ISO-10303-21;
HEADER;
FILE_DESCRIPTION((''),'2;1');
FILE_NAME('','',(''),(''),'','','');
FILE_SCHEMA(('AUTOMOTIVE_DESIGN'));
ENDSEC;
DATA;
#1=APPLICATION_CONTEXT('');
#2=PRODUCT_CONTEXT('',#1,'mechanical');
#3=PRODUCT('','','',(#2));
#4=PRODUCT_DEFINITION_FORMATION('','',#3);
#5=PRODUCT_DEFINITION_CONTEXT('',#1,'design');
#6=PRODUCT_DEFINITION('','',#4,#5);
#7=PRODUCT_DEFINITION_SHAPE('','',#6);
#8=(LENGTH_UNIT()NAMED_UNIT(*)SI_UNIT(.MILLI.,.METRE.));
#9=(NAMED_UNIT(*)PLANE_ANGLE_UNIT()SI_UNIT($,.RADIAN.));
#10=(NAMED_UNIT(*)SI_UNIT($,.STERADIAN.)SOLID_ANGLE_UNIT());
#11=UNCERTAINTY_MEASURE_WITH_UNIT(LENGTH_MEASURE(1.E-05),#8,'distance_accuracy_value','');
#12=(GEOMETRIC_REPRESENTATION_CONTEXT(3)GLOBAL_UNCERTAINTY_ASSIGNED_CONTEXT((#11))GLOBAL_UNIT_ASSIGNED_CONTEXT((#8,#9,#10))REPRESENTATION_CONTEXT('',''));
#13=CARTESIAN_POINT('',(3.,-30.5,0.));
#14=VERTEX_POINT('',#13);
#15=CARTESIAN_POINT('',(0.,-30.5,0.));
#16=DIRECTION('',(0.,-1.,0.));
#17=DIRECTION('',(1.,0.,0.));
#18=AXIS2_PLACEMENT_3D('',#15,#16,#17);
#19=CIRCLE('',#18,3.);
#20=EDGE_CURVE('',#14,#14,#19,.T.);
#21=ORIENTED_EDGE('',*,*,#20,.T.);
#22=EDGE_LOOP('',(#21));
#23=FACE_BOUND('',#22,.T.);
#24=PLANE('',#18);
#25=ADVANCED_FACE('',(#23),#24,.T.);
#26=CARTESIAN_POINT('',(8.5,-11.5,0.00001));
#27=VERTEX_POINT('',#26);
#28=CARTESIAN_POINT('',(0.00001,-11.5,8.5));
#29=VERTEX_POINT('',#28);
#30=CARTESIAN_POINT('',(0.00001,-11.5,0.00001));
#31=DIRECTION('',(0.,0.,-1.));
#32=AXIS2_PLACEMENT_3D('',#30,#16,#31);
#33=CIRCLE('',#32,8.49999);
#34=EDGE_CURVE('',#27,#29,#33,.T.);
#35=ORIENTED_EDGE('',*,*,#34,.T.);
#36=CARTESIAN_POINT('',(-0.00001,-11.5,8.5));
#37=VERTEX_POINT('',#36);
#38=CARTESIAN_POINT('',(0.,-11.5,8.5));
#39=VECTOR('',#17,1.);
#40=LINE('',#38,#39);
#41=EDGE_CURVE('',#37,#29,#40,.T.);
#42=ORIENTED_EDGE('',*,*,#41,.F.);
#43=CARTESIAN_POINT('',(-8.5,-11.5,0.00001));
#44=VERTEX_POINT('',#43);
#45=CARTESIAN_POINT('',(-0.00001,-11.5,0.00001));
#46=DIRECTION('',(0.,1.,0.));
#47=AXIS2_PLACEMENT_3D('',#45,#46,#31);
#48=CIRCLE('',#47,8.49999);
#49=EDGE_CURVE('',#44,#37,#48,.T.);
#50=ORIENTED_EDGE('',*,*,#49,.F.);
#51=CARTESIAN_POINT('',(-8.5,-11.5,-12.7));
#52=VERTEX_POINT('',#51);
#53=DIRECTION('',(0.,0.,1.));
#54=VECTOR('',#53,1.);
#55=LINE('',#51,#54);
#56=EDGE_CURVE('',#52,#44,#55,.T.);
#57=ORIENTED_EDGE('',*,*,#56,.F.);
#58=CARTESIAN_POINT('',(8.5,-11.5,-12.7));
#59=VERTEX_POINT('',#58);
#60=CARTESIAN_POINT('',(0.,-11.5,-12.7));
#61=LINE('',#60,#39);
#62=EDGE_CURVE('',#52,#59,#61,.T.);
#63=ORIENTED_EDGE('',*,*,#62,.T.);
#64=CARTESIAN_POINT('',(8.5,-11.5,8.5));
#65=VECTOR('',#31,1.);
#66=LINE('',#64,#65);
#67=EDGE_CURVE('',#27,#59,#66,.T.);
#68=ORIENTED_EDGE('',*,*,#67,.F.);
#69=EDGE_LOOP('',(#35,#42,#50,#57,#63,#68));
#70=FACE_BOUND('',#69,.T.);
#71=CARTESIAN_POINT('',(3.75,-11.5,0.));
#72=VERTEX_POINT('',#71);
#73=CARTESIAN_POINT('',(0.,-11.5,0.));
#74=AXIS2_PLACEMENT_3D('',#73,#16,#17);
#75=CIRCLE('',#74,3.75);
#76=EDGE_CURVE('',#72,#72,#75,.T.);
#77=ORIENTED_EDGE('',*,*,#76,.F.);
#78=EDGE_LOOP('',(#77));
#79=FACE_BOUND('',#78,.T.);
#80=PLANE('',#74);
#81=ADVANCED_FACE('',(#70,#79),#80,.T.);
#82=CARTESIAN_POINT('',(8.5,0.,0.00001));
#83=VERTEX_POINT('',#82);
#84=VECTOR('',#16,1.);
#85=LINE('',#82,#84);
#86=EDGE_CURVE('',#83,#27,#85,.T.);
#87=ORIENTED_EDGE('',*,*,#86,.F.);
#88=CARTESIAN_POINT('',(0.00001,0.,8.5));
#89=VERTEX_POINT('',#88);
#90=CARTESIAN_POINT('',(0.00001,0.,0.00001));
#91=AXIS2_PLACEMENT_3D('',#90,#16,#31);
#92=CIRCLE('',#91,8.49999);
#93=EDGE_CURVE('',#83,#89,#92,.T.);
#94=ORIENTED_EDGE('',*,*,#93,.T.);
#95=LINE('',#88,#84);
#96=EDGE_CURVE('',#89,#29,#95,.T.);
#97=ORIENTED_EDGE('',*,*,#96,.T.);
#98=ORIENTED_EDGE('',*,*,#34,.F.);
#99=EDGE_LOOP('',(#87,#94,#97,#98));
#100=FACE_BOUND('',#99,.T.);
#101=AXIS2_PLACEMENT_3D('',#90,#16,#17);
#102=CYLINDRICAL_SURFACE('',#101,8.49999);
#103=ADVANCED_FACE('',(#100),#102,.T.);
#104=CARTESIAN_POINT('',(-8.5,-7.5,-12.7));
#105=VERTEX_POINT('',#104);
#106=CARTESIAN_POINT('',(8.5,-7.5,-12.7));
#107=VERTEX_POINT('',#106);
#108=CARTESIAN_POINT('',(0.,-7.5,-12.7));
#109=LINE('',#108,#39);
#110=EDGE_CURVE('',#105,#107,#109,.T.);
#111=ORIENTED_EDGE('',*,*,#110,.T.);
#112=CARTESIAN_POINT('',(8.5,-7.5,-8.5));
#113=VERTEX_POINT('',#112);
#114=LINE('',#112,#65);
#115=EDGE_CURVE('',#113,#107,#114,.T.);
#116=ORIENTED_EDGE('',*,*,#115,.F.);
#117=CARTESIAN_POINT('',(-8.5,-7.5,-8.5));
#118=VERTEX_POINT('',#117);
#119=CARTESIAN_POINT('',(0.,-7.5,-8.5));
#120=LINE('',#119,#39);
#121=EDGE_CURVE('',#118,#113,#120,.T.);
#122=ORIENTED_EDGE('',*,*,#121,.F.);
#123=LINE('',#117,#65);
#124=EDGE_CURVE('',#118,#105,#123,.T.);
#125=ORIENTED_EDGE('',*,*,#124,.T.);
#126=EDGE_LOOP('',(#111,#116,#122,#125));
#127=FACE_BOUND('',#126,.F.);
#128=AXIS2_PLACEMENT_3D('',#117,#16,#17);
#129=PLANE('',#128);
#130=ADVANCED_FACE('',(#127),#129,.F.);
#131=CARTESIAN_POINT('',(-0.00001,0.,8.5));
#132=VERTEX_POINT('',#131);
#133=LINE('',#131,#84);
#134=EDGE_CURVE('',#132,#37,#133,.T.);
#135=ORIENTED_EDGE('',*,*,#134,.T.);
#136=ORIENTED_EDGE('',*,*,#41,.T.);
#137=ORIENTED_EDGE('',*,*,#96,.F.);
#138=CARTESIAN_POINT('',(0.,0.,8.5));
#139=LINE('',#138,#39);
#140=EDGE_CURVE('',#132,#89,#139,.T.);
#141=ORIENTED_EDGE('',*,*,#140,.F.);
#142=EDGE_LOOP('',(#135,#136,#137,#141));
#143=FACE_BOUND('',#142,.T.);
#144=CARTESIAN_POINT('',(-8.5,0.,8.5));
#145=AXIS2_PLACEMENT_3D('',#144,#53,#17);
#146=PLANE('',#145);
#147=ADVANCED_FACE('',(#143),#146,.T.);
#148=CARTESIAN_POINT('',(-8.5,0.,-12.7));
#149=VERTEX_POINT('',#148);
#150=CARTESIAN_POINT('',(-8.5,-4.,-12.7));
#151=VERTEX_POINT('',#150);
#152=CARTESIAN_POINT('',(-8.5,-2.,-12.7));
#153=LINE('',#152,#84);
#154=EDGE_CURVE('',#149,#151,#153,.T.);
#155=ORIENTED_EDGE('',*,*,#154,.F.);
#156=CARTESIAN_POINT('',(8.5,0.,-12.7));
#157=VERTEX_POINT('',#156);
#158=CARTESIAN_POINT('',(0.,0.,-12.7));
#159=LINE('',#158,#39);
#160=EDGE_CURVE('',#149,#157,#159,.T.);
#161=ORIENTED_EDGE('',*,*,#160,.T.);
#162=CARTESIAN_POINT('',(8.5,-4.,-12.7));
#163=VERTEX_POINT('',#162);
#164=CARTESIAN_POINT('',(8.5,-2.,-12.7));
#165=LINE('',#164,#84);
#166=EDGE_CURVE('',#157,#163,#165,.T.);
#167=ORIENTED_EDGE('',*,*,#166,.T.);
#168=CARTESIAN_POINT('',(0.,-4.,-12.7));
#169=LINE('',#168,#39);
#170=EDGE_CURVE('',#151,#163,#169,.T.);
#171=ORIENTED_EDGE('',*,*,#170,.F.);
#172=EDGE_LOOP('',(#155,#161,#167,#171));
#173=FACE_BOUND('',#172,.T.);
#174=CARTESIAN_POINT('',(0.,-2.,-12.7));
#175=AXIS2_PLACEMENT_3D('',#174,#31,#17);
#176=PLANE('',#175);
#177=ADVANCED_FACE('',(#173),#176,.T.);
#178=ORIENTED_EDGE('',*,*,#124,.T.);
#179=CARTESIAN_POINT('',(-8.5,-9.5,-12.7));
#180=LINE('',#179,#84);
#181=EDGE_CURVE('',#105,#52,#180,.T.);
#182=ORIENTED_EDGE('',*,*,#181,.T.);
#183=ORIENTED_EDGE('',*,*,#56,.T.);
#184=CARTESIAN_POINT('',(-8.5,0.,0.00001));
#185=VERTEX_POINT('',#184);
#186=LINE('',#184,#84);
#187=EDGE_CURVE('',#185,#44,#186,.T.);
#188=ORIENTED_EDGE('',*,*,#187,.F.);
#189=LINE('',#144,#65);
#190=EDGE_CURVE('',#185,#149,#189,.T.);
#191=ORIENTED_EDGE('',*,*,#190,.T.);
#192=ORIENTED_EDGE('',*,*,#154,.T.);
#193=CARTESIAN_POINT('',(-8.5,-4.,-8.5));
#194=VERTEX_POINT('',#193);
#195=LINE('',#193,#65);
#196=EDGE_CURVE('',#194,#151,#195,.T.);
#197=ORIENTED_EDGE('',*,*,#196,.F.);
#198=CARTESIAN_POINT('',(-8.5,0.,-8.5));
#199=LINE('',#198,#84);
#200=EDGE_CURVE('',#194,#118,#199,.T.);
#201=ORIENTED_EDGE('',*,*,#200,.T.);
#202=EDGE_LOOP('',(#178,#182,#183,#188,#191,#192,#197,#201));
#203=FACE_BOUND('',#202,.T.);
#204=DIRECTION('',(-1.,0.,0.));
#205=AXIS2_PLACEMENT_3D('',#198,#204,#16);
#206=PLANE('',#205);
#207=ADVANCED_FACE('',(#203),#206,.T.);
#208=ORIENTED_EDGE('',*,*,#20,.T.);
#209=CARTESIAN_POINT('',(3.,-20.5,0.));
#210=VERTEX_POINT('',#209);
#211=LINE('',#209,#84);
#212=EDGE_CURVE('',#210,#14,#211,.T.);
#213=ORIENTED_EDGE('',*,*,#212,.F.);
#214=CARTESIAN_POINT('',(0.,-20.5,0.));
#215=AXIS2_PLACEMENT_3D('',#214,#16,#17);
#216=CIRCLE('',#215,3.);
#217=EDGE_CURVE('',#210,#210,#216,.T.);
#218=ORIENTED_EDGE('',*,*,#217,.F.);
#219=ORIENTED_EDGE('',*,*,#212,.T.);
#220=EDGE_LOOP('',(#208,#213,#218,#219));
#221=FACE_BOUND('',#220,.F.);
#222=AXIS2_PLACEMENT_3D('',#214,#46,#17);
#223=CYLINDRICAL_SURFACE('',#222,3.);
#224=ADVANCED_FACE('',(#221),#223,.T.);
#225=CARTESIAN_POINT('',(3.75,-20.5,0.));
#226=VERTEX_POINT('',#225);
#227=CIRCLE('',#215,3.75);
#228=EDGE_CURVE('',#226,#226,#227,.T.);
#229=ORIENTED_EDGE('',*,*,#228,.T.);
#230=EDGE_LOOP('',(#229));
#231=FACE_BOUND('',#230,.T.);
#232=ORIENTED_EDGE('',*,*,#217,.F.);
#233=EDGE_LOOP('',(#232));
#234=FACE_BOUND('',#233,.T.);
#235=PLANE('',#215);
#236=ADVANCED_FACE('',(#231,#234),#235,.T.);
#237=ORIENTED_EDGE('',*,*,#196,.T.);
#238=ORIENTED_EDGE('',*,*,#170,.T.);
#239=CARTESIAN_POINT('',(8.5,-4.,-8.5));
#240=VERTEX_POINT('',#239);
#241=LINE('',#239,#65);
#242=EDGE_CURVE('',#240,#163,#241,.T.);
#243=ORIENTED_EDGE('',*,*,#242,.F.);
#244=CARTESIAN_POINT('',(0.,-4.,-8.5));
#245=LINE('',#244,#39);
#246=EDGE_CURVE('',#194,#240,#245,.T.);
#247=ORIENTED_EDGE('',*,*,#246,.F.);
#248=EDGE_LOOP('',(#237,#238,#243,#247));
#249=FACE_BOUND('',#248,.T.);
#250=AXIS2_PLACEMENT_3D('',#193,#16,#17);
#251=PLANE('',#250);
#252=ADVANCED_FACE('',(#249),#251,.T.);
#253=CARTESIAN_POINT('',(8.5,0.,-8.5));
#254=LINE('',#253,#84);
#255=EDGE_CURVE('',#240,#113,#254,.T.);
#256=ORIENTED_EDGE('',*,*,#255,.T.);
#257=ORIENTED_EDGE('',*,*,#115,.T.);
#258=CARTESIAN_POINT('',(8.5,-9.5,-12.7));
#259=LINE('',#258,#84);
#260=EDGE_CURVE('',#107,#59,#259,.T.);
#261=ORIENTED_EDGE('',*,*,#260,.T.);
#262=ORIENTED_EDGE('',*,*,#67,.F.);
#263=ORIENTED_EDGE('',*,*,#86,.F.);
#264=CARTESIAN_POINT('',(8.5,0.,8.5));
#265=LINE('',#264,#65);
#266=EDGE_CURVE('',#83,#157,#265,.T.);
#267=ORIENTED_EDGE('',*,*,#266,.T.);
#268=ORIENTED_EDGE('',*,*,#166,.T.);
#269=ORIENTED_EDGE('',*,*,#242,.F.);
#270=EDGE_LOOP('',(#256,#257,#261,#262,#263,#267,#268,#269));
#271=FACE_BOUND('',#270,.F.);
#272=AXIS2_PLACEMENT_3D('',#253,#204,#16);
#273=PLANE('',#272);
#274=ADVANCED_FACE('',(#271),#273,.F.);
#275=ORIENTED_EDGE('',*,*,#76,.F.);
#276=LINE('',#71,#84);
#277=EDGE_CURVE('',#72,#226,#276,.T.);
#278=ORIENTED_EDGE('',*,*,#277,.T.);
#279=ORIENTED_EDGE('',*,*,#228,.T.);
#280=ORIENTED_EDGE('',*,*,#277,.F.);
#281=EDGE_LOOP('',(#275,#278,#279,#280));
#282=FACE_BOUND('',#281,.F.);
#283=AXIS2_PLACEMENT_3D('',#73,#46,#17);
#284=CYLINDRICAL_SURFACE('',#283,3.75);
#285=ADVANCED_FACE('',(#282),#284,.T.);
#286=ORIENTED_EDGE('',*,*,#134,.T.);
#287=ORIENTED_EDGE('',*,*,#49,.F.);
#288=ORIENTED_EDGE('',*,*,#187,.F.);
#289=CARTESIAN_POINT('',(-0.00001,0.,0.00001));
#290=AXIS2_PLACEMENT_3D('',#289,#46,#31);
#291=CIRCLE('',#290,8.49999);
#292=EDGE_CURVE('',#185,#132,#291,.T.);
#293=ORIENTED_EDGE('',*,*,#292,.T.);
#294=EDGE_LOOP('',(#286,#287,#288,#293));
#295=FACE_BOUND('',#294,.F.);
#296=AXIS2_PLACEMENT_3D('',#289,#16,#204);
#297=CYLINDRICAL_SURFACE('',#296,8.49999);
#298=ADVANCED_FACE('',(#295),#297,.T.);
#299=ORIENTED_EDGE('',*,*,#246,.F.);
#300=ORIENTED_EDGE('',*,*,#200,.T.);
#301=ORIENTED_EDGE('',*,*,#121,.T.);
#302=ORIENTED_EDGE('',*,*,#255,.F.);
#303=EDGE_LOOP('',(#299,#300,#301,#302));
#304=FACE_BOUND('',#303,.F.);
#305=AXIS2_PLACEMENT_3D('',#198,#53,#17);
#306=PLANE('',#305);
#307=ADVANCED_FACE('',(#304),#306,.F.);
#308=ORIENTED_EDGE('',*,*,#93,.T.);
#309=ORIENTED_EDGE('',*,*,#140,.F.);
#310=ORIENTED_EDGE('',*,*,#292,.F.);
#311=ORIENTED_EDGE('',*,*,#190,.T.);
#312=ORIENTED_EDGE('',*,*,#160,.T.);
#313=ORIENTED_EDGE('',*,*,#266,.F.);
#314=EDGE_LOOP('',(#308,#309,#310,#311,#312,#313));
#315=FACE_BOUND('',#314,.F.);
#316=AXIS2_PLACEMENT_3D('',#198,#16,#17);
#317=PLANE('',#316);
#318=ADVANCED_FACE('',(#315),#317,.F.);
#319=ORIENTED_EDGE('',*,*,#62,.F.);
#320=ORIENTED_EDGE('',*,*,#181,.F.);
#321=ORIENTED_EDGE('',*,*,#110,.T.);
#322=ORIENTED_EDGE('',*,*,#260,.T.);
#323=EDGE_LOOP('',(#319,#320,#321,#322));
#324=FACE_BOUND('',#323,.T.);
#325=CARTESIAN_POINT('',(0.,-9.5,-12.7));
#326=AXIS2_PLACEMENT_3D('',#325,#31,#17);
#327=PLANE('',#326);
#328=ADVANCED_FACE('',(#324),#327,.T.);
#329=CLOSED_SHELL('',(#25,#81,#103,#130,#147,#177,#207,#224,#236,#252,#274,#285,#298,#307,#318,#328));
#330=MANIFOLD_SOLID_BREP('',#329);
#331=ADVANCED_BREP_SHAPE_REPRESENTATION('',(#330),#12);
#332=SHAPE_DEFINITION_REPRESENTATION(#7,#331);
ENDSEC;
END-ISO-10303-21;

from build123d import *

# Parameters (mm, degrees)
F0_W     = 17
F0_H     = 17
F1_DEPTH = 11.5
F2_R     = 3.75
F3_DEPTH = 9
F4_R     = 3
F5_DEPTH = 10
F6_W     = 17
F6_H     = 4
F7_DEPTH = 4.2
F8_R     = 8.49999


# Not quite as in the source:
# - a fillet or chamfer is up to 0.001 mm smaller than in the source, because OpenCascade refuses the exact size


with BuildPart() as f1:
    # F0 (on Front) → F1 (new body)
    with BuildSketch(Plane.XZ):
        Rectangle(F0_W, F0_H)
    extrude(amount=F1_DEPTH)

    # F2 (on face) → F3 (join)
    with BuildSketch(Plane.XZ.offset(11.5)):
        Circle(F2_R)
    extrude(amount=F3_DEPTH)

    # F4 (on face) → F5 (join)
    with BuildSketch(Plane.XZ.offset(20.5)):
        Circle(F4_R)
    extrude(amount=F5_DEPTH)

    # F6 (on face) → F7 (join)
    with BuildSketch(Plane(origin=(0, 0, -8.5), x_dir=(1, 0, 0), z_dir=(0, 0, -1))):
        with Locations((0, 2)):
            Rectangle(F6_W, F6_H)
        with Locations((0, 9.5)):
            Rectangle(F6_W, F6_H)
    extrude(amount=F7_DEPTH)

    # F8 (radius 8.5 in the source; OpenCascade refuses exactly that, so slightly less here)
    f8_edges = [f1.edges().sort_by_distance(p)[0] for p in [
        (8.5, -5.75, 8.5),
        (-8.5, -5.75, 8.5),
    ]]
    fillet(f8_edges, radius=F8_R)


solid = f1.part
